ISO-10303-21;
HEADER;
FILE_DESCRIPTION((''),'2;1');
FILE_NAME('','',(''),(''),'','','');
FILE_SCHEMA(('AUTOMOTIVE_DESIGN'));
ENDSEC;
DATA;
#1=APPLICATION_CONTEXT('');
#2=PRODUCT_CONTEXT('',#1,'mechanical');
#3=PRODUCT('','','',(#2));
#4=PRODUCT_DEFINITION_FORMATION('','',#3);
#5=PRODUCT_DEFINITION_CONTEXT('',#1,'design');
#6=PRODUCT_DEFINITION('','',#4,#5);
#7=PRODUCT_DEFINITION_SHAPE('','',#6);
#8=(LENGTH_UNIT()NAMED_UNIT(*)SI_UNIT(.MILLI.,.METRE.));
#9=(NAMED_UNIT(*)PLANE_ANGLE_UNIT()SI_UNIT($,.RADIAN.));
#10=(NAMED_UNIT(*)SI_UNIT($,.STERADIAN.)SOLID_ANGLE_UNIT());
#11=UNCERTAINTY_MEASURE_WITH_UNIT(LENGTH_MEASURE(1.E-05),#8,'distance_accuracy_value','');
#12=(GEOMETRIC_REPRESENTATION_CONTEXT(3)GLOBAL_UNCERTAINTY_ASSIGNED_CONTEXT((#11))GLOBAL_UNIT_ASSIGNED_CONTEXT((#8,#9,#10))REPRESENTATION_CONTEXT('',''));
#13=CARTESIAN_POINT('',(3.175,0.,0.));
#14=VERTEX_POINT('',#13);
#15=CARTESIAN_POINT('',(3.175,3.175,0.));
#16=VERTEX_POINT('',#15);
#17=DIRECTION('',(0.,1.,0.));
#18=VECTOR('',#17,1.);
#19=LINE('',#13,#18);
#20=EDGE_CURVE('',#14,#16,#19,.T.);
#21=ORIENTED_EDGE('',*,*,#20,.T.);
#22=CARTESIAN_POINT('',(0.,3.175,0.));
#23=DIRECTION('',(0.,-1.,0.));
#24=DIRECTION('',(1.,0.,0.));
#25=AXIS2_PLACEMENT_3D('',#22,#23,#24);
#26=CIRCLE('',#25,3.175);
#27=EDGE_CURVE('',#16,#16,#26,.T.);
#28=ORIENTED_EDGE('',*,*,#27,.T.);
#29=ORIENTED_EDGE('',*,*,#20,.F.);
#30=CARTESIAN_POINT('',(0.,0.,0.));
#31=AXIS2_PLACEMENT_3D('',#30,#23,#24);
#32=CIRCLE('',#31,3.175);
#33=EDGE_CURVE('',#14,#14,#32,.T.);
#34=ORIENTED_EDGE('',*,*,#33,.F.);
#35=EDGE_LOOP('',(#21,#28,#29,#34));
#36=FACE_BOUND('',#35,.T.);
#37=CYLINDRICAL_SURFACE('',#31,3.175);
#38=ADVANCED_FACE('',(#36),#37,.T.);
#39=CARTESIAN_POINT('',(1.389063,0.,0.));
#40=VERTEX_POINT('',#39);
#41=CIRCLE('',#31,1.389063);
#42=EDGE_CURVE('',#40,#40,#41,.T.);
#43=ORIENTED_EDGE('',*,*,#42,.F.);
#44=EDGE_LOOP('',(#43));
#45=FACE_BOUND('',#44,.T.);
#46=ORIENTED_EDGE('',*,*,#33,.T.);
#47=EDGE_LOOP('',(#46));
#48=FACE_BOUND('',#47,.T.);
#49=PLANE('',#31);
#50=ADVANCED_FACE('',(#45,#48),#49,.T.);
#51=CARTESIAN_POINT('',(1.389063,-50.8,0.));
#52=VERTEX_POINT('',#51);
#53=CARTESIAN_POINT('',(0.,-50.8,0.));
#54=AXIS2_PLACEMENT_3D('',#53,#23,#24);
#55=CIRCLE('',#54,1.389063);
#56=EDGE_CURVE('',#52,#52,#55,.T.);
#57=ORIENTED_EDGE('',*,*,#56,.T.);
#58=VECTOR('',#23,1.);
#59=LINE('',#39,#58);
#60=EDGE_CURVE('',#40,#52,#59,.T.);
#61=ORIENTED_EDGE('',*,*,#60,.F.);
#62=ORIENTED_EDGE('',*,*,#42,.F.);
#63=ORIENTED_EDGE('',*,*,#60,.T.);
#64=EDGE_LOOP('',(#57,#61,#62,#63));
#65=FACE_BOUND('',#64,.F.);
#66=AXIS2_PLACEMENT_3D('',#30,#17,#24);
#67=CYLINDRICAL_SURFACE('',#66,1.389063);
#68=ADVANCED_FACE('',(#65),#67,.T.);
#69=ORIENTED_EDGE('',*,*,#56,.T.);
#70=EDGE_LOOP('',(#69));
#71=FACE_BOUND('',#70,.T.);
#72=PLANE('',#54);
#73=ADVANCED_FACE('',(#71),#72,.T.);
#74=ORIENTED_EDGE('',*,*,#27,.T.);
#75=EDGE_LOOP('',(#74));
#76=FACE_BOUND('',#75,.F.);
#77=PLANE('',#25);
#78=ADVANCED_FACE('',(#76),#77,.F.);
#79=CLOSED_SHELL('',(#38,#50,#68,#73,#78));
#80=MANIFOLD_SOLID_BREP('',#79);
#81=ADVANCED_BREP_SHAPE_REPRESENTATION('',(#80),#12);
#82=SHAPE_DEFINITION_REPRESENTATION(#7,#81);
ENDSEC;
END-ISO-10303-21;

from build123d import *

# Parameters (mm, degrees)
F0_R     = 1.3890625
F1_DEPTH = 50.8
F2_R     = 3.175
F3_DEPTH = 3.175


# Not quite as in the source:
# - a feature names something its author has since deleted; it is built from what else it names


with BuildPart() as f1:
    # F0 (on Front) → F1 (new body)
    with BuildSketch(Plane.XZ):
        Circle(F0_R)
    extrude(amount=F1_DEPTH)

    # F2 (on Front) → F3 (join)
    with BuildSketch(Plane.XZ):
        Circle(F2_R)
    extrude(amount=-F3_DEPTH)


solid = f1.part
